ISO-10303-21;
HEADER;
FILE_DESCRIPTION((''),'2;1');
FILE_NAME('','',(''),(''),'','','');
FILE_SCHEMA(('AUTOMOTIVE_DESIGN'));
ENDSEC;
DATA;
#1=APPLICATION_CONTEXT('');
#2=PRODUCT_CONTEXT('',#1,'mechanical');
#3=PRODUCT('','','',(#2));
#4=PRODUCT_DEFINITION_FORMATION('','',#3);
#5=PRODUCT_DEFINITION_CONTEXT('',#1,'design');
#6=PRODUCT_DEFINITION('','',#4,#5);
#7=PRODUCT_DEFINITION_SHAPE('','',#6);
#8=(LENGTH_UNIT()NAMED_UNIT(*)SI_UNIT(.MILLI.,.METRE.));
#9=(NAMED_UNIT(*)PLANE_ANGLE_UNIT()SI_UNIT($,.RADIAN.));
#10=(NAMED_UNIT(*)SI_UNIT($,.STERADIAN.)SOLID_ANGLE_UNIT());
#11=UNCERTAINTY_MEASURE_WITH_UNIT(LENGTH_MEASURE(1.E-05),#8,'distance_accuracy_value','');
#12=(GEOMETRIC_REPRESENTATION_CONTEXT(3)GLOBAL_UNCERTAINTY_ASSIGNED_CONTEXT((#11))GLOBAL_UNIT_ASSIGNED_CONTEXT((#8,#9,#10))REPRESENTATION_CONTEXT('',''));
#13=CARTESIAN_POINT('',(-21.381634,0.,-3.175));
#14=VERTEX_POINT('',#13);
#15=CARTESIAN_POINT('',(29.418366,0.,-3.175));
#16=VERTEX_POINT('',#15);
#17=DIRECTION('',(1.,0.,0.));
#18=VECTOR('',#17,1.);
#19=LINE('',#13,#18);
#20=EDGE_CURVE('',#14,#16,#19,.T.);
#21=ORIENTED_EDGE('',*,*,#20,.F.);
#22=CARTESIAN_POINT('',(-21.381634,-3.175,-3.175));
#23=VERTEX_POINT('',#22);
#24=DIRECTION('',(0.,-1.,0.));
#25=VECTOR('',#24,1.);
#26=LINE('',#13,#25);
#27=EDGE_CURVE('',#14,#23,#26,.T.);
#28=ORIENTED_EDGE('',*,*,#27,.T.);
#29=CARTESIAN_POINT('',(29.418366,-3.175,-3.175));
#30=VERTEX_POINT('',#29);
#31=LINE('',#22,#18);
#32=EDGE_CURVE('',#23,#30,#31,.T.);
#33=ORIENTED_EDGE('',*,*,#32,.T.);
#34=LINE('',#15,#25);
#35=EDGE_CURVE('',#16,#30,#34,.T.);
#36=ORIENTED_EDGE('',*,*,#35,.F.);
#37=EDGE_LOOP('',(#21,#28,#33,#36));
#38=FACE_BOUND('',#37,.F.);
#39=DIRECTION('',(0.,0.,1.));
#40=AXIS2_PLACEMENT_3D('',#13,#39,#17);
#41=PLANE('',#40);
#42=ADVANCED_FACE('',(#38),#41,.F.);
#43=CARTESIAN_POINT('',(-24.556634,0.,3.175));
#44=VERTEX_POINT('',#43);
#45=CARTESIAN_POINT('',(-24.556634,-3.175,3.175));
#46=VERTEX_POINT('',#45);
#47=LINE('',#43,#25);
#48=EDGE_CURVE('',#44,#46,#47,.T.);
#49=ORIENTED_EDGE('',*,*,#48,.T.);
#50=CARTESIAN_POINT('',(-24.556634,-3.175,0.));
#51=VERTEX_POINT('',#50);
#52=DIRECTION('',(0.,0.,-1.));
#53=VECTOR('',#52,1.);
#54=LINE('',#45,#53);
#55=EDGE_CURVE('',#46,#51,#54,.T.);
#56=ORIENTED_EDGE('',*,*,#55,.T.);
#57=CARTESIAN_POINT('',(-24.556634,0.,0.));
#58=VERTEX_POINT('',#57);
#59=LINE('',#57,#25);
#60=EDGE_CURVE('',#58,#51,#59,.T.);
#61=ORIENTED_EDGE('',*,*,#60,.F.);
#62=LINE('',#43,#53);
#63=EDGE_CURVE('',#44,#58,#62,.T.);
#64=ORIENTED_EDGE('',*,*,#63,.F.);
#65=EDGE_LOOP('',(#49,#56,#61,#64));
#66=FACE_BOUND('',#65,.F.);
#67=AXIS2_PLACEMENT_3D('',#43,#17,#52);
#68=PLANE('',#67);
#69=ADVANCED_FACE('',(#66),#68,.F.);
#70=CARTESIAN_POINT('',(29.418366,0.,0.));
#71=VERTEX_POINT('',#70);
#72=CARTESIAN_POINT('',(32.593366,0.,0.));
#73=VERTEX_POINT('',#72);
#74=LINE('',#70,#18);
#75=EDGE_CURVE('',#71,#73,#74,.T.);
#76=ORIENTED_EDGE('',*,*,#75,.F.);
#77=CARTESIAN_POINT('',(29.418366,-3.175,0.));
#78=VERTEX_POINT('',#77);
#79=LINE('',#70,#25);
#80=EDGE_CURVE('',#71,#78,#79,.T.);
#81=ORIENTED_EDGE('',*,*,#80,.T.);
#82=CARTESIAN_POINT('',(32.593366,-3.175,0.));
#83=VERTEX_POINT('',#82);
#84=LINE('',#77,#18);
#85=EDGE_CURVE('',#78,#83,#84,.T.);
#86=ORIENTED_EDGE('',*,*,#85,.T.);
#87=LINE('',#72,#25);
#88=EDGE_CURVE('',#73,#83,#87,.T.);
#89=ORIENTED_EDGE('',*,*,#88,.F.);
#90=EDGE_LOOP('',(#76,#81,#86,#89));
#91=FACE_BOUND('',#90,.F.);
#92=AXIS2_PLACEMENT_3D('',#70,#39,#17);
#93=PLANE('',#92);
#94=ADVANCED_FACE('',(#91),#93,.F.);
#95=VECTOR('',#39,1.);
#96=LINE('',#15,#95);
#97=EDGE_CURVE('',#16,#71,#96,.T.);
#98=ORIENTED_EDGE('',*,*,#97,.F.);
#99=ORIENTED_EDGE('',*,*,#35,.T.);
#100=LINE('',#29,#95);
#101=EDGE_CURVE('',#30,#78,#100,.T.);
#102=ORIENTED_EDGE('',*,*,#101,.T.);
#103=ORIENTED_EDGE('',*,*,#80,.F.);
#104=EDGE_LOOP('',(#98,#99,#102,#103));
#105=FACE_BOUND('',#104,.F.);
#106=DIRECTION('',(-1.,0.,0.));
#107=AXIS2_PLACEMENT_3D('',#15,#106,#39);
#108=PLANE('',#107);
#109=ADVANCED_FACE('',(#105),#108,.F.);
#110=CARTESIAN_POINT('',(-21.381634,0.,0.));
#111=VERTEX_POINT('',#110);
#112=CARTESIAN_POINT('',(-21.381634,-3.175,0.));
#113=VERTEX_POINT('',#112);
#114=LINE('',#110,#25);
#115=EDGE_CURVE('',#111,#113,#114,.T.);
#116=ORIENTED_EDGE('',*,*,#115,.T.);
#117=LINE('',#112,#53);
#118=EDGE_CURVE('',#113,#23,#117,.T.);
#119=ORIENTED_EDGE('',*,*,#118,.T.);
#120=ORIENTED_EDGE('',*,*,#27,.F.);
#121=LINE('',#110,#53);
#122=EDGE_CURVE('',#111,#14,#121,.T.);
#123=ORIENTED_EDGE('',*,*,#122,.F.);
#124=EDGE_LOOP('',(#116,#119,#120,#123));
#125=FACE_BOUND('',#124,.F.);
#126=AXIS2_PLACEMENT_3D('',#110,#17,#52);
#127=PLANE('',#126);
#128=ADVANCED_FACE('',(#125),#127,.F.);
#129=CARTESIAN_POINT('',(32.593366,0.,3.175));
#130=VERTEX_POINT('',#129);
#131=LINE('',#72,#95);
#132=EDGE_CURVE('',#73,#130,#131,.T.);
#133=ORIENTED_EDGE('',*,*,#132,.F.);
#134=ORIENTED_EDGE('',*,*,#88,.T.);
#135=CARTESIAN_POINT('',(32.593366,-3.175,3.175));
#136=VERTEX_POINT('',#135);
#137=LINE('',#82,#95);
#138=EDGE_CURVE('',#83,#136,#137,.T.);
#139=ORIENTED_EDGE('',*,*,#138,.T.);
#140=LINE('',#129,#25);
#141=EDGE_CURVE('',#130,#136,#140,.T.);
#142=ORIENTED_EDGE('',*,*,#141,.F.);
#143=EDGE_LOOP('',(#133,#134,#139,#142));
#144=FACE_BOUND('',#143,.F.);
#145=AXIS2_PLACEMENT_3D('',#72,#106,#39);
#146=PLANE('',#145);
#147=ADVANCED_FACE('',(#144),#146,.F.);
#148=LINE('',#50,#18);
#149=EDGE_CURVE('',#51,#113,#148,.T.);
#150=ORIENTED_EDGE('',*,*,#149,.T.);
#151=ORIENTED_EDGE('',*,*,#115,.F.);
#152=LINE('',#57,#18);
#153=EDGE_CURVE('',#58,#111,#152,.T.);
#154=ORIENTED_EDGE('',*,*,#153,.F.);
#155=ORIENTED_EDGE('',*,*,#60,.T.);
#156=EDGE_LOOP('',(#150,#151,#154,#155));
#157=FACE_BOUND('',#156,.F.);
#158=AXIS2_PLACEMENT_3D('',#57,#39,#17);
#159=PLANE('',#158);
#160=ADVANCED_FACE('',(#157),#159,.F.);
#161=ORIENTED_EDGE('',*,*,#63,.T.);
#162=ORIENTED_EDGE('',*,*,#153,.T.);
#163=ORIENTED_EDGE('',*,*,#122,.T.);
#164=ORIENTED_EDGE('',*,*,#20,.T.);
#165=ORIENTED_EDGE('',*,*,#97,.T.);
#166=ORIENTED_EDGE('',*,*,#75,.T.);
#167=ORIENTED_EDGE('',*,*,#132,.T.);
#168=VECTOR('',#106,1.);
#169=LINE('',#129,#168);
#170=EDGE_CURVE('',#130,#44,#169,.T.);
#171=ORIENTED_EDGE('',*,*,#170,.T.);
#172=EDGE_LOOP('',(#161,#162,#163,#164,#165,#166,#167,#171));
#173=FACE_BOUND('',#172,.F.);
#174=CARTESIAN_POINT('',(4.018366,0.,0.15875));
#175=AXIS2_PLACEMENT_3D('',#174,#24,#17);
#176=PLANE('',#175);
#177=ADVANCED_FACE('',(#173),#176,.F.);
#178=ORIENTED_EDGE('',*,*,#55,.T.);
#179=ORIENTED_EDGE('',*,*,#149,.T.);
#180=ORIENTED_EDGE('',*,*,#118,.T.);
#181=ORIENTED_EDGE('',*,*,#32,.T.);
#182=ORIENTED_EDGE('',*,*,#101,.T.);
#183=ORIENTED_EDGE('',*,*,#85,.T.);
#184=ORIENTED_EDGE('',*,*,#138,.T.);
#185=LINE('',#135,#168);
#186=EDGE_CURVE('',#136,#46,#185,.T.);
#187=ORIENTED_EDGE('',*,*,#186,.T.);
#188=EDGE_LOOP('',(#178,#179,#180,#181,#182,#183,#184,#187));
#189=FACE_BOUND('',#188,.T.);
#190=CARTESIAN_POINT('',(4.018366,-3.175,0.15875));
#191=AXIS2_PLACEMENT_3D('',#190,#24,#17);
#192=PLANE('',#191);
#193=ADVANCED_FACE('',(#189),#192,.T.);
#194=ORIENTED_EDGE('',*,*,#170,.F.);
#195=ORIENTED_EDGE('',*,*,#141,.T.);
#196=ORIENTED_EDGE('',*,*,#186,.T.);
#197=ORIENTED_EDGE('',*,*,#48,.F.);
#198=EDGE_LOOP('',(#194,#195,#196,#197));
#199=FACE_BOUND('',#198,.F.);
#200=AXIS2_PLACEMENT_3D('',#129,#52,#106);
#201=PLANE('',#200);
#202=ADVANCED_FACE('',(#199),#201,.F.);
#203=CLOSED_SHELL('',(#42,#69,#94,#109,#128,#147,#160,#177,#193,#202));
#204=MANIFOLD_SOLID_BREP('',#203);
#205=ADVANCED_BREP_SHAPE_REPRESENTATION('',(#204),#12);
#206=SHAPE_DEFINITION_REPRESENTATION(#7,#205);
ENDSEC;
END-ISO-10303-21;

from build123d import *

# Parameters (mm, degrees)
F1_DEPTH = 3.175


# Not quite as in the source:
# - a length typed as a fraction of an inch, garbled in the dataset ("3 / 203.2 mm" for 3/8 in), is restored


with BuildPart() as f1:
    # F0 (on Front) → F1 (new body)
    with BuildSketch(Plane.XZ):
        Polygon((-24.5566335312, 3.175), (-24.5566335312, 0), (-21.3816335312, 0), (-21.3816335312, -3.175), (29.4183664688, -3.175), (29.4183664688, 0), (32.5933664688, 0), (32.5933664688, 3.175), align=None)
    extrude(amount=F1_DEPTH)


solid = f1.part
